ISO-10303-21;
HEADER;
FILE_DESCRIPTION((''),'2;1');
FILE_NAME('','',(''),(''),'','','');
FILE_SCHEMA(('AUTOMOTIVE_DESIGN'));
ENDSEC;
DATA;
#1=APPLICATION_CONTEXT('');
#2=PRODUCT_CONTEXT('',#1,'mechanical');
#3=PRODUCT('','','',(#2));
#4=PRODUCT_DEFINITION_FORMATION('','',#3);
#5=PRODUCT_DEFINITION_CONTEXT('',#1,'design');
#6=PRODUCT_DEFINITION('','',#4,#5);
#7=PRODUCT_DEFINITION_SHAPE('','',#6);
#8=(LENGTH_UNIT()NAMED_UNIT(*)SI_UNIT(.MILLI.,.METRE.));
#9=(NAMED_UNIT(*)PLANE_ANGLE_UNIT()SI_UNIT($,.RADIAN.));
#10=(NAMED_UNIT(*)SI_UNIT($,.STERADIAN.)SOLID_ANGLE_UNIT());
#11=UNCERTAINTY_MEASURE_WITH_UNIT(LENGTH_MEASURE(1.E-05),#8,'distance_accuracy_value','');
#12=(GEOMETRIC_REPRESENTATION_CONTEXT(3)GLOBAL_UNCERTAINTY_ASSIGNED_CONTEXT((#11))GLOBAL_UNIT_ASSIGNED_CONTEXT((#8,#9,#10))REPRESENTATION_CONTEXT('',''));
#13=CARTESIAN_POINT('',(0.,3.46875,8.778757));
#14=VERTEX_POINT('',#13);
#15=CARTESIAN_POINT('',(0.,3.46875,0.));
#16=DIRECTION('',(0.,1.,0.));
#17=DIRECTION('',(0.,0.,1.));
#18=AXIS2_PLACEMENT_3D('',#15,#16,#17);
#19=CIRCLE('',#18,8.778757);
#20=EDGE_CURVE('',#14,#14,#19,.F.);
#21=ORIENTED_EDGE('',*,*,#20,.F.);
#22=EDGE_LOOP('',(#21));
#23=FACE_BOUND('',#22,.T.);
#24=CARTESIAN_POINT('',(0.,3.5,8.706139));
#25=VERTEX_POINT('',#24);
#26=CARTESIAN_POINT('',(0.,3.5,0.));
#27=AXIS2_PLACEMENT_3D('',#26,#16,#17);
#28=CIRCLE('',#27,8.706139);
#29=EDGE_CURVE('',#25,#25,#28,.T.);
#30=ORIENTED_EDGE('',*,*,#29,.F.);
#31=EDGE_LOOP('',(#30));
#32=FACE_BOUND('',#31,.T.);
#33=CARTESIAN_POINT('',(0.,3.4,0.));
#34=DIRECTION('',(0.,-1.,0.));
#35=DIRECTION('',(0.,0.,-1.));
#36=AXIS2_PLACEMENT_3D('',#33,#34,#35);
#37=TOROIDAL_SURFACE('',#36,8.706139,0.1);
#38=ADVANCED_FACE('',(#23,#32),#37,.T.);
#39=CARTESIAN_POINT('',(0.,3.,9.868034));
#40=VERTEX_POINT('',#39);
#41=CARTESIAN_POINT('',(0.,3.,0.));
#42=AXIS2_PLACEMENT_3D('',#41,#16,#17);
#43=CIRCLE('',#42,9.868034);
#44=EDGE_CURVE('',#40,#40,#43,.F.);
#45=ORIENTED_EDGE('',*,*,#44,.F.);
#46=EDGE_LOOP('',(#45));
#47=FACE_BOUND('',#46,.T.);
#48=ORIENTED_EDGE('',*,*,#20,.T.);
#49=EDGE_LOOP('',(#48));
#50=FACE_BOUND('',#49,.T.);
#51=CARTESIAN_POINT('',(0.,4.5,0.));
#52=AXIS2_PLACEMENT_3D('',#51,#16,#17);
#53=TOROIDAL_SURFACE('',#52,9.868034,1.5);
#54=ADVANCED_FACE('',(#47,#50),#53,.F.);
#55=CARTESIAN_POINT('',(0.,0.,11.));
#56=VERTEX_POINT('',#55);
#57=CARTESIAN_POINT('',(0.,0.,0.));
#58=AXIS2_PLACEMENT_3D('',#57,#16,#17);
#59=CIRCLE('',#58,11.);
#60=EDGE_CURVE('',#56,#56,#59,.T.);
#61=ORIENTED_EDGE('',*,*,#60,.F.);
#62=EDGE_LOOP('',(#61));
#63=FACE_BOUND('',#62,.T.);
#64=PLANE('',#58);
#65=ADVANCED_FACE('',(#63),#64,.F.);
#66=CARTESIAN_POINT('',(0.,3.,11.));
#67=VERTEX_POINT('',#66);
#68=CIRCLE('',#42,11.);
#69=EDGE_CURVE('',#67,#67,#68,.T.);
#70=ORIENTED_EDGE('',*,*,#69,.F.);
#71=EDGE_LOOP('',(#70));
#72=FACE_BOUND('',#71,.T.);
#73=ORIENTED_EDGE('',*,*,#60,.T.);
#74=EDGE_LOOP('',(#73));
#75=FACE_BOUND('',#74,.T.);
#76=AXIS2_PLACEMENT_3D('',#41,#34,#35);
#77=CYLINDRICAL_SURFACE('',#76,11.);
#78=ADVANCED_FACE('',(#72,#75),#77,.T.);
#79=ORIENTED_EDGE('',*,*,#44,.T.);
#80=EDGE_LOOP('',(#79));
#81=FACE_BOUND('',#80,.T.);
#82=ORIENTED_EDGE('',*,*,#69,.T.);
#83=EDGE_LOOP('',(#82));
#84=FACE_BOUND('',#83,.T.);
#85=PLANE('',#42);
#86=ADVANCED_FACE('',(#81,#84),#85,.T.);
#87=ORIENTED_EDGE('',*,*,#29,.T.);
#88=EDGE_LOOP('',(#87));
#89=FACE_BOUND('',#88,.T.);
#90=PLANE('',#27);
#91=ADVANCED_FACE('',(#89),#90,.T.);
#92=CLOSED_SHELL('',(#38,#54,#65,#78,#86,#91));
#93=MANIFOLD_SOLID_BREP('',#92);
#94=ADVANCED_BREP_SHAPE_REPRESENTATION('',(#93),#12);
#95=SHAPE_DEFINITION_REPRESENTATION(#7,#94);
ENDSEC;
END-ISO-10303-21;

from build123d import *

# Parameters (mm, degrees)
SKETCH_1_R      = 11
EXTRUDE_1_DEPTH = 3
SKETCH_2_R      = 8.75
EXTRUDE_2_DEPTH = 0.5
FILLET_1_R      = 1.5
FILLET_2_R      = 0.1


with BuildPart() as part:
    # 草图1 → 凸台-拉伸1 (new body)
    with BuildSketch(Plane(origin=(0, 0, 0), x_dir=(1, 0, 0), z_dir=(0, 1, 0))):
        with Locations(Location((0, 0, 0), (0, 0, 270))):
            Circle(SKETCH_1_R)
    extrude(amount=EXTRUDE_1_DEPTH)

    # 草图2 → 凸台-拉伸2 (add)
    with BuildSketch(Plane(origin=(0, 3, 0), x_dir=(1, 0, 0), z_dir=(0, 1, 0))):
        with Locations(Location((0, 0, 0), (0, 0, 270))):
            Circle(SKETCH_2_R)
    extrude(amount=EXTRUDE_2_DEPTH)

    # 圆角1
    # the kernel refuses this fillet: 1.5 mm, written as the material it adds along each edge
    with BuildSketch(Plane(origin=(0, 3, 0), x_dir=(0, 0, 1), z_dir=(-1, 0, 0))) as fillet_1_piece_1:
        with BuildLine():
            CenterArc((9.868033989, 1.5), FILLET_1_R, 221.810314896, 48.189685104)
            Line((8.75, 0.5), (8.72763932, 0.48))
            ThreePointArc((8.72763932, 0.48), (8.72, 0.25), (8.72, 0))
            Line((8.72, 0), (8.75, -0.03))
            Line((8.75, -0.03), (9.868033989, -0.03))
            Line((9.868033989, -0.03), (9.868033989, 0))
        make_face()
    revolve(axis=Axis((0, 3, 0), (0, 1, 0)))

    # 圆角2
    fillet_2_edges = [part.edges().sort_by_distance(p)[0] for p in [
        (0, 3.5, -8.75),
    ]]
    fillet(fillet_2_edges, radius=FILLET_2_R)


solid = part.part
